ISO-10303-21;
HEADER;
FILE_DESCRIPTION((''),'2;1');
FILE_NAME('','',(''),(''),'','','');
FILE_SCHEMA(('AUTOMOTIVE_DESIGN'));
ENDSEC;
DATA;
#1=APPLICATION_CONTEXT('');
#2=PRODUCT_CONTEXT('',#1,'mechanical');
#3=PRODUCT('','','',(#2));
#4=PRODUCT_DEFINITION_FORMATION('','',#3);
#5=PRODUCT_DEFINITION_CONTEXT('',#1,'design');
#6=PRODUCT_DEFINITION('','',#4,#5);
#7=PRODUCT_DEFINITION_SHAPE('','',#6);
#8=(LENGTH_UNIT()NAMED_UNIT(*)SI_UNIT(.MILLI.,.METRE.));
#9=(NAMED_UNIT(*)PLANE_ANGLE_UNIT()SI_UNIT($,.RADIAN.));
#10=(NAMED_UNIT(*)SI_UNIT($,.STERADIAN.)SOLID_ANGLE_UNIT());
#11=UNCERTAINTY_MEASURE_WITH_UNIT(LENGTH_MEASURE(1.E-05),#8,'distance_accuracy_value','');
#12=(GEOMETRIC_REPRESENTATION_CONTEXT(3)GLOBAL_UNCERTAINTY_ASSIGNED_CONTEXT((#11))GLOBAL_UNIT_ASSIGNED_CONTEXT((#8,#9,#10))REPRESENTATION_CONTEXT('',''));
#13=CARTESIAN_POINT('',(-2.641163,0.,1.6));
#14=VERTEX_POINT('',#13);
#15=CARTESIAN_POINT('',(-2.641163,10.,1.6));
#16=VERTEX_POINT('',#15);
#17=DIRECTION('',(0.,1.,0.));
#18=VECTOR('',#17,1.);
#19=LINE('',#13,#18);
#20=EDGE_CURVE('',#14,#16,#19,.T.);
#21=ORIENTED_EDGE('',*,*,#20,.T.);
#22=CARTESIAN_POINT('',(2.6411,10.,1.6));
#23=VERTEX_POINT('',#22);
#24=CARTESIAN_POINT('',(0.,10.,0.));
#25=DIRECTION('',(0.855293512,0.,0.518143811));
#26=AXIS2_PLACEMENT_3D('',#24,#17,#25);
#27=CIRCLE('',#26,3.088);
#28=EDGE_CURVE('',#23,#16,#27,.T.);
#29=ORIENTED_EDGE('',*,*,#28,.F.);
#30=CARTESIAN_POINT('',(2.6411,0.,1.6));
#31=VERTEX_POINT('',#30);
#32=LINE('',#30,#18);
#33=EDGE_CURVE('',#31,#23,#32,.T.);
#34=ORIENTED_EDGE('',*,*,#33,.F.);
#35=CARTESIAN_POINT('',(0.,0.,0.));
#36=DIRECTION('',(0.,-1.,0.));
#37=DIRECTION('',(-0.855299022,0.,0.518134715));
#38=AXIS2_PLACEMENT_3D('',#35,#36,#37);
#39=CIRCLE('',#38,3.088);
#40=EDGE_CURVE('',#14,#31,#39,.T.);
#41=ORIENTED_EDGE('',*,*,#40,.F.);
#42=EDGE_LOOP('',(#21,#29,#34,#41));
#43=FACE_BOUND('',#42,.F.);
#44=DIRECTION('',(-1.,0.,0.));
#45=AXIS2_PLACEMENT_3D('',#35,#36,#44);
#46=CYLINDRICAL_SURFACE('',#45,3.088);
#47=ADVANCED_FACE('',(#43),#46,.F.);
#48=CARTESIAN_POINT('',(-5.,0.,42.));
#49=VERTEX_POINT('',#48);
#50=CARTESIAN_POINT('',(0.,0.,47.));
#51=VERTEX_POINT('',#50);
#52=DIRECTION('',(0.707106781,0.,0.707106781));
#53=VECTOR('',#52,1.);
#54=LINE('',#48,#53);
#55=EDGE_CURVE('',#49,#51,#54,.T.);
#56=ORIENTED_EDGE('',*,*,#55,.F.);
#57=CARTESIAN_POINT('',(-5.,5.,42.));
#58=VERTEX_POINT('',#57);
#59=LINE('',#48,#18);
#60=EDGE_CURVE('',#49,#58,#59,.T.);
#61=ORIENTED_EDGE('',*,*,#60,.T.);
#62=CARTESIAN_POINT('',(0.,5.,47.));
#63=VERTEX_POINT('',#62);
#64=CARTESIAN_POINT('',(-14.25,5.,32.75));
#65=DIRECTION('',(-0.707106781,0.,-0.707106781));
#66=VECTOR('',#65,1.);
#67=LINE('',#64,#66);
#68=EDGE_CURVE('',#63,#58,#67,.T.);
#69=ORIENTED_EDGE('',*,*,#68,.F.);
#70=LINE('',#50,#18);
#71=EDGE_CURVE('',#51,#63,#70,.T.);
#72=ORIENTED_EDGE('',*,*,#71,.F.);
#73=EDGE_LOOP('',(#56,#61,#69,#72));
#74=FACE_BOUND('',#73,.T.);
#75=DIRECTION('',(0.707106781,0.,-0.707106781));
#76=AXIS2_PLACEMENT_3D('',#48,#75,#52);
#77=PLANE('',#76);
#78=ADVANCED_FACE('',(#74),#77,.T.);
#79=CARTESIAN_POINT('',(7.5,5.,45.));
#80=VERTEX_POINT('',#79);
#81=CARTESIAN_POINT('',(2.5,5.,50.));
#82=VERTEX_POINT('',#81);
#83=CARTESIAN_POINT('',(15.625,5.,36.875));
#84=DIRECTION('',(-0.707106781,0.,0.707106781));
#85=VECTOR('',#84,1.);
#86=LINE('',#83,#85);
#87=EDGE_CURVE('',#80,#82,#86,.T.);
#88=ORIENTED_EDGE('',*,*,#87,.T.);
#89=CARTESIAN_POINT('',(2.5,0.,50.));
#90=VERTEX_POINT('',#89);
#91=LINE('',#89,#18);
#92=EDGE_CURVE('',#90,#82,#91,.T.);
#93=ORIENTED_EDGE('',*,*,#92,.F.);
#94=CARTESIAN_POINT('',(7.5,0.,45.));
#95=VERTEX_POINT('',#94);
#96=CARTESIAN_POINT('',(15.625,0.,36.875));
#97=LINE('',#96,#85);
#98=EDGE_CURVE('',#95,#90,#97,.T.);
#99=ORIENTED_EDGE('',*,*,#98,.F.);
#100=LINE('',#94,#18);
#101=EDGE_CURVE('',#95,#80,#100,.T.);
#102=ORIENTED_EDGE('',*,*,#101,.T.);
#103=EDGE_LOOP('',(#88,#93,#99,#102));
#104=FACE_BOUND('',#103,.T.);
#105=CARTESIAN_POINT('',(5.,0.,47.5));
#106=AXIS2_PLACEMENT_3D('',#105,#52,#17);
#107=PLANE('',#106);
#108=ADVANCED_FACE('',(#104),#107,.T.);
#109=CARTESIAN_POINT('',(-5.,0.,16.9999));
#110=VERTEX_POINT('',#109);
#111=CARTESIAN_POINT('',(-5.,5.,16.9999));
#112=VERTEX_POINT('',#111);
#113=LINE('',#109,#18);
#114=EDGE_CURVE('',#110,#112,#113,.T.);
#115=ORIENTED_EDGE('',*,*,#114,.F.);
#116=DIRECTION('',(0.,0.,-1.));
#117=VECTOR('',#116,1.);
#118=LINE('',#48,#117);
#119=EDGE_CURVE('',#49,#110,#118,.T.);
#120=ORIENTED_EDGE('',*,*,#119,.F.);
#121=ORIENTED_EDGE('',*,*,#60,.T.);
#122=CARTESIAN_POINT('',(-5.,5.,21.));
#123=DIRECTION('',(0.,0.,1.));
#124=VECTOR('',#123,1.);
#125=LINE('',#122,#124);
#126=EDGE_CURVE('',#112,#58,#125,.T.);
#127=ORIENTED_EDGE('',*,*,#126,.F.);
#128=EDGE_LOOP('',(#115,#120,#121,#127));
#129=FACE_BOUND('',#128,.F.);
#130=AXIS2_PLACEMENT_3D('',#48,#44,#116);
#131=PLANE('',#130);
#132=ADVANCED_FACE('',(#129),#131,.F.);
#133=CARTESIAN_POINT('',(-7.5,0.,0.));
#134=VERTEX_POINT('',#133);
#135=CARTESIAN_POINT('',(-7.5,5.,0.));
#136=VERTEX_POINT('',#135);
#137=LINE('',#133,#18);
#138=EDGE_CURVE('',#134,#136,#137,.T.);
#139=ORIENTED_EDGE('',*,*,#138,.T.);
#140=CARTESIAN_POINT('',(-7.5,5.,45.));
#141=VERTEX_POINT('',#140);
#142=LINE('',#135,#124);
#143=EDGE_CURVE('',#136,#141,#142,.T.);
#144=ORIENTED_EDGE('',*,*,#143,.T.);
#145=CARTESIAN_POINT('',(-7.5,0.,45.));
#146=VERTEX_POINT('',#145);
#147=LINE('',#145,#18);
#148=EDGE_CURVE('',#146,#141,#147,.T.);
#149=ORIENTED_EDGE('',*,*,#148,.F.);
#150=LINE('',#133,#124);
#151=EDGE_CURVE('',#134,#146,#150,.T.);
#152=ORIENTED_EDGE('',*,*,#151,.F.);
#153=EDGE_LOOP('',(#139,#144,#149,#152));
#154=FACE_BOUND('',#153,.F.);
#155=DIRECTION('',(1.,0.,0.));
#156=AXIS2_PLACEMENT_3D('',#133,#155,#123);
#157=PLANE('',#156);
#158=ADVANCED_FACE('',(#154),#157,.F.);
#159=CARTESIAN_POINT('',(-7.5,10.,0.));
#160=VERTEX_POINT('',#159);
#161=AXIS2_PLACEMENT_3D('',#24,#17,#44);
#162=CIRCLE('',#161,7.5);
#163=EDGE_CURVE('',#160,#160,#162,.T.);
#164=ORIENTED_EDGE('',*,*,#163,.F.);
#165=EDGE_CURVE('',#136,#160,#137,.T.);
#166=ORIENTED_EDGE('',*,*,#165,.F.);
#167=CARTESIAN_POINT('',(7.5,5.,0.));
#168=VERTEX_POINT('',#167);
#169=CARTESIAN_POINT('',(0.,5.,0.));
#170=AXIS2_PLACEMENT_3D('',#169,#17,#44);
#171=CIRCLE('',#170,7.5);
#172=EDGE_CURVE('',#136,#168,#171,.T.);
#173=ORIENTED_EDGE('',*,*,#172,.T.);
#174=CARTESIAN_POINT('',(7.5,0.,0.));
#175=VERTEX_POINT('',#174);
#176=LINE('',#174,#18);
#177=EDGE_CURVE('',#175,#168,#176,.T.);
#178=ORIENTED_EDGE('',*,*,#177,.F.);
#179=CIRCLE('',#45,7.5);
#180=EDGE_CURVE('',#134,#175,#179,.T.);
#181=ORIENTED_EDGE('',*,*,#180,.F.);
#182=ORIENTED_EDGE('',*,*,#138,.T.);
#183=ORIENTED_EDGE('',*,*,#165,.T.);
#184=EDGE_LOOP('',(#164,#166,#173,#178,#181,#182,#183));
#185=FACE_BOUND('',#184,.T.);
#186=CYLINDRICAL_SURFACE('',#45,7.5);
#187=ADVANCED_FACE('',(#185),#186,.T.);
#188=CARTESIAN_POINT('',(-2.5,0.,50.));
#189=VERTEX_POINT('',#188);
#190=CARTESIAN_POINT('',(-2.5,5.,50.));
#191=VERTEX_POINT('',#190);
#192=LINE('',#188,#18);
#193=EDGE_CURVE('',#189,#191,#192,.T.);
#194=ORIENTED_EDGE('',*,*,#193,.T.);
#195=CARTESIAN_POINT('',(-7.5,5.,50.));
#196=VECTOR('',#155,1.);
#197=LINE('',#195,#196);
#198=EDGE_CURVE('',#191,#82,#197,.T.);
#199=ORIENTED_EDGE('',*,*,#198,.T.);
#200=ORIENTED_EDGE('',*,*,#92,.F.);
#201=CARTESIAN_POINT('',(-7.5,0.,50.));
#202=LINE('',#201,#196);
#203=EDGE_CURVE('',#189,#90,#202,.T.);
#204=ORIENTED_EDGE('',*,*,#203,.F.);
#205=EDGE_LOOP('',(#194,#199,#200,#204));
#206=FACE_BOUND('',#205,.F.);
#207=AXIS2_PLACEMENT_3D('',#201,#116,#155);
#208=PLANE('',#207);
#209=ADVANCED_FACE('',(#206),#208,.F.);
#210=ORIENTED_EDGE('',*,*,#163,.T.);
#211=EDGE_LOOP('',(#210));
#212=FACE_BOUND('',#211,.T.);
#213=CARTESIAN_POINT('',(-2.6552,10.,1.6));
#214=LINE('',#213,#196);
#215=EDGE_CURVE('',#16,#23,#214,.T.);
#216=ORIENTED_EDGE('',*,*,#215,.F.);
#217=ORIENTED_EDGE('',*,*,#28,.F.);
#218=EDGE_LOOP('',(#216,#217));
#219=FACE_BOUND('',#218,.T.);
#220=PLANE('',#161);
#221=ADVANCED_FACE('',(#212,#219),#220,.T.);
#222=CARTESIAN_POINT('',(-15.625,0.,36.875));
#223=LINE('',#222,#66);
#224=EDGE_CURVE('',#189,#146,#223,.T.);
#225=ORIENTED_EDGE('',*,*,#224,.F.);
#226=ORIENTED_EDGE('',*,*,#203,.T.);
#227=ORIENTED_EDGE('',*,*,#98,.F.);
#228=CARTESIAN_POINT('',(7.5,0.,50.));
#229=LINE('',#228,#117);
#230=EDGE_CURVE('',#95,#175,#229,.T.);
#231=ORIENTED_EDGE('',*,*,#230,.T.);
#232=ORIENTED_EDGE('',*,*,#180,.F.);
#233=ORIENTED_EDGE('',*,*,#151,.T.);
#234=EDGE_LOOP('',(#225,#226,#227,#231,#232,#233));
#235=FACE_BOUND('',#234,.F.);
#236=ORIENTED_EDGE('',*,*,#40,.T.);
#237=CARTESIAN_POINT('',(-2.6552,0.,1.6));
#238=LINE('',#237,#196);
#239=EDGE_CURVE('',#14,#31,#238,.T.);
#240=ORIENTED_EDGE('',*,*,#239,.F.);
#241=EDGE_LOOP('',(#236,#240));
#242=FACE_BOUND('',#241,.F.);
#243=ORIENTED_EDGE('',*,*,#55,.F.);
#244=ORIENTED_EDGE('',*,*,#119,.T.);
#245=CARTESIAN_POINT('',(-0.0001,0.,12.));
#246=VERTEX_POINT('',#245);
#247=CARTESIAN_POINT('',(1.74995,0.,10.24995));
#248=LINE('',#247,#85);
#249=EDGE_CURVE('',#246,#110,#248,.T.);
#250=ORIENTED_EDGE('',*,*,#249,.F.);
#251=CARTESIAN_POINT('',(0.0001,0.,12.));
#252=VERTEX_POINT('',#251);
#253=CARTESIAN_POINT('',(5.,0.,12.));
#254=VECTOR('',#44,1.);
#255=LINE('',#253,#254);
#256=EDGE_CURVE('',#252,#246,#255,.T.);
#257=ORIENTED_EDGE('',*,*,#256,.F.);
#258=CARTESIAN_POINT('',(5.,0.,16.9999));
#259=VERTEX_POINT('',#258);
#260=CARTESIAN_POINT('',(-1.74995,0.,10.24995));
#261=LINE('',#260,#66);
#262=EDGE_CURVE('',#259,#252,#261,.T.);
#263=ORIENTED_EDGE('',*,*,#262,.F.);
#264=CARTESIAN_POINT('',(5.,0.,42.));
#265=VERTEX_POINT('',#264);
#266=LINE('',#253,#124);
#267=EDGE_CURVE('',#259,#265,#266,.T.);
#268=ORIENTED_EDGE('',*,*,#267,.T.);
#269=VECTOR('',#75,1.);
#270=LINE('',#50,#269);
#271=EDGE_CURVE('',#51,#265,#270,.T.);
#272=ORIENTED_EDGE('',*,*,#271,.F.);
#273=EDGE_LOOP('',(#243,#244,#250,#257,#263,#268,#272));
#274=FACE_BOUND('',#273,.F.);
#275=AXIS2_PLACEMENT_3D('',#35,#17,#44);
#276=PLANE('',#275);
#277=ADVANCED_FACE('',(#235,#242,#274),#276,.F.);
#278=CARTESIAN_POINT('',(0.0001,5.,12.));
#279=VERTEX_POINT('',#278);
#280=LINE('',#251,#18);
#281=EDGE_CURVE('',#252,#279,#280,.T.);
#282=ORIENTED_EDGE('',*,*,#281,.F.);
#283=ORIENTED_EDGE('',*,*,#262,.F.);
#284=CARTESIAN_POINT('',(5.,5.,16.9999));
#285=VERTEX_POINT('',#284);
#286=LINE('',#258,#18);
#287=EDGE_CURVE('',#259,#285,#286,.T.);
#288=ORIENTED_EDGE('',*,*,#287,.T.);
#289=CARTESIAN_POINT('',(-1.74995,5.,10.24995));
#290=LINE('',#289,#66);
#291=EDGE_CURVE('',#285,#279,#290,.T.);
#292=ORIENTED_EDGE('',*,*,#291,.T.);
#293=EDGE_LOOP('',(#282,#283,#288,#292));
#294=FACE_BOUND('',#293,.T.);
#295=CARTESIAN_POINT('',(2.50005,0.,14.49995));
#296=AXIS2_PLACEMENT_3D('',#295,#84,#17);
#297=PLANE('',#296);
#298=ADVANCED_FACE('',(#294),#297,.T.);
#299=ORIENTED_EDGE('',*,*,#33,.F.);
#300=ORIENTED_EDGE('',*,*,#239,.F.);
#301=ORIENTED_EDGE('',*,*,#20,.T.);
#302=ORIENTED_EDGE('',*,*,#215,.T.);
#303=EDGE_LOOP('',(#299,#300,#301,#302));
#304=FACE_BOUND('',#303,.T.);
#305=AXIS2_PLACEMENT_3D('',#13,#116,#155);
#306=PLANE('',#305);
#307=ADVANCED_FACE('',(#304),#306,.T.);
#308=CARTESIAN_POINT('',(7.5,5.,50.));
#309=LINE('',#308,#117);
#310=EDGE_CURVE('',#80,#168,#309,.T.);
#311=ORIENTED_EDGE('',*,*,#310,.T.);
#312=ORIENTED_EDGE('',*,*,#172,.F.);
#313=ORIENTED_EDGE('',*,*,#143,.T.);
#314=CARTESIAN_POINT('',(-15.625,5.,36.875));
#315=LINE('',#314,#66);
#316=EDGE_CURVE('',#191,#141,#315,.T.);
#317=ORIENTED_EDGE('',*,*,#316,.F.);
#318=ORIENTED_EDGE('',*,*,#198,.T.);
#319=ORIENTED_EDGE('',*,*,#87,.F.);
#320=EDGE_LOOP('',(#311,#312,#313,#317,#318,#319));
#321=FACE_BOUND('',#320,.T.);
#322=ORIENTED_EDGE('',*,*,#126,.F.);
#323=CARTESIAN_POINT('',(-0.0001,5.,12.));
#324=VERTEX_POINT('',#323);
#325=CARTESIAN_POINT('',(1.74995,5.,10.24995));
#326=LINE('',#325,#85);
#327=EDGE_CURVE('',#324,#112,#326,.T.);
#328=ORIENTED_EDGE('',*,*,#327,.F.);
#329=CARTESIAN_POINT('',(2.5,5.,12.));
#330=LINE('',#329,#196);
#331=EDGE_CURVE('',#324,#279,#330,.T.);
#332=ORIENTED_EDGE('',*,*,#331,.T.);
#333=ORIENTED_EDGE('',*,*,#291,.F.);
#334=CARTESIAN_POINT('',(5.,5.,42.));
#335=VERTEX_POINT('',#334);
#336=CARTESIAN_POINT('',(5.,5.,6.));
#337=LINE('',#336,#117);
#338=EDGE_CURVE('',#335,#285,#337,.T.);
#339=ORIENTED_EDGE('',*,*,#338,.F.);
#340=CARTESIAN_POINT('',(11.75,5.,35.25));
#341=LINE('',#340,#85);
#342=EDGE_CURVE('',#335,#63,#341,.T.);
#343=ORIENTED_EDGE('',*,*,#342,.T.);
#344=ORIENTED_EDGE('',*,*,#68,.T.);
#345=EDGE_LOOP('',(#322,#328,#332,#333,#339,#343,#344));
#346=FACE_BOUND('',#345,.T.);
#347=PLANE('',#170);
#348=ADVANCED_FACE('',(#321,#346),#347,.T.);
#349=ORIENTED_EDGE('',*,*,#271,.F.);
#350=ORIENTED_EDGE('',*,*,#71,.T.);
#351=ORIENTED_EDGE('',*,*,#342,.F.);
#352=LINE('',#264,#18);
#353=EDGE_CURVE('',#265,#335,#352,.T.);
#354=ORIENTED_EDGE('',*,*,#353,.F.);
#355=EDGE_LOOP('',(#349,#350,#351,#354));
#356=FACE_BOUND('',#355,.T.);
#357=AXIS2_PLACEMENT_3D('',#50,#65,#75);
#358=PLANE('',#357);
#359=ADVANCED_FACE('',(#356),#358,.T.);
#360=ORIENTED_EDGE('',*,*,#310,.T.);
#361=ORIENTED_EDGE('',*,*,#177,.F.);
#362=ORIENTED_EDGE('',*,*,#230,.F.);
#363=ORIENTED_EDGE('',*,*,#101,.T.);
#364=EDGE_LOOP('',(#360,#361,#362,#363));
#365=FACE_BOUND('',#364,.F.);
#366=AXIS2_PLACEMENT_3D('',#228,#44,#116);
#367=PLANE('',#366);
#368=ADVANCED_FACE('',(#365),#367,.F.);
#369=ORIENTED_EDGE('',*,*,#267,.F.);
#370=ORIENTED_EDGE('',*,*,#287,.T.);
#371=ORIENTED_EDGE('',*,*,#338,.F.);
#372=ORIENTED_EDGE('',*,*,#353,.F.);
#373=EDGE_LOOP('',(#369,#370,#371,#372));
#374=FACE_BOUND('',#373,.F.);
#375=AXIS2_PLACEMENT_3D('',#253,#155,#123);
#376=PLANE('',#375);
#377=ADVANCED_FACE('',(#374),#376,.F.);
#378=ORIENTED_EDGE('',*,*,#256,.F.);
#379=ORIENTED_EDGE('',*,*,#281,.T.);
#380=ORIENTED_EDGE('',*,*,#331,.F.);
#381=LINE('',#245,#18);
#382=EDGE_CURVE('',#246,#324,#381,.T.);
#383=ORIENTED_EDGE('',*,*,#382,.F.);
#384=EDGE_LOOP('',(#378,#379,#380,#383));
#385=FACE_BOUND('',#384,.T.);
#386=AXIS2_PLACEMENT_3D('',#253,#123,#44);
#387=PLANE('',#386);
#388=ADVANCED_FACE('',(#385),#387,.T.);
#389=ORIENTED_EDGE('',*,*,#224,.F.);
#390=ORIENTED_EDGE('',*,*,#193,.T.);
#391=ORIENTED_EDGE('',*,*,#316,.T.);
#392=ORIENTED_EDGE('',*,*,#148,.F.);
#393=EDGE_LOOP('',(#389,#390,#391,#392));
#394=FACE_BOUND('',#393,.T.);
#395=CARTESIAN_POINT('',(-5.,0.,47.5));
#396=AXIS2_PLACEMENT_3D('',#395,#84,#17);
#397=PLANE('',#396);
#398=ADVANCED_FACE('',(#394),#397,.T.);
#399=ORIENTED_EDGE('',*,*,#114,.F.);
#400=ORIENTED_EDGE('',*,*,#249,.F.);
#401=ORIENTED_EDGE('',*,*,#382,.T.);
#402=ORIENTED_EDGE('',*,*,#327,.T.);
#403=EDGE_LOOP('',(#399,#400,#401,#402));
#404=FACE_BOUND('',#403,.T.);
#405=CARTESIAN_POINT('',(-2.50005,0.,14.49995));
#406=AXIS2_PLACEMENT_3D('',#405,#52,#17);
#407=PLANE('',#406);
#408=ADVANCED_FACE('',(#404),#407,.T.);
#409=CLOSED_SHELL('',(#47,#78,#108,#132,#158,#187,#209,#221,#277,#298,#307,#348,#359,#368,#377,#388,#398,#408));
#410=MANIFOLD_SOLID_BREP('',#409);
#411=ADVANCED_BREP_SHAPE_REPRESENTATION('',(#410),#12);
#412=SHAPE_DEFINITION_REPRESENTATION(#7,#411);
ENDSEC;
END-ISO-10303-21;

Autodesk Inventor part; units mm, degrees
ref_plane "YZ Plane" through (0, 0, 0) normal (1, 0, 0) x (0, 1, 0)
ref_plane "XZ Plane" through (0, 0, 0) normal (0, 1, 0) x (-1, 0, 0)
ref_plane "XY Plane" through (0, 0, 0) normal (0, 0, 1) x (1, 0, 0)
sketch "Sketch1" plane through (0, 0, 0) normal (0, 1, 0) x (-1, 0, 0)
  arc A0 (-2.2913, 1) -> (2.2913, 1) centre (0, 0) ccw
  circle A1 centre (0, 0) radius 3.088
  line L0 (2.6552, 1.6) -> (-2.6552, 1.6)
  line L1 (-2.6411, 1.6) -> (2.6552, 1.6)
  line L2 (2.2913, 1) -> (-2.2913, 1)
  circle A2 centre (0, 0) radius 7.5
  line L3 (7.5, 0) -> (7.5, 50)
  line L4 (7.5, 50) -> (-7.5, 50)
  line L5 (-7.5, 50) -> (-7.5, 0)
  point P0 (2.6411, 1.6)
  point P1 (-2.6411, 1.6)
  dimension "d1" = 15
  dimension "d2" = 50
extrude "Extrusion1" add sketch "Sketch1" along normal blind 10 contours A1 L0 | A2 picked at (0.7371, 1.7852)
extrude "Extrusion2" add sketch "Sketch1" along normal blind 5 contours A2 L5 L4 L3
chamfer "Chamfer1" distance 5 angle 45 2 edges at (-7.5, 2.5, 50) (7.5, 2.5, 50)
sketch "Sketch3" plane through (0, 0, 0) normal (0, -1, 0) x (1, 0, 0)
  line L0 (-5, 42) -> (0, 47)
  line L1 (-2.5, 50) -> (-7.5, 45) projected
  line L2 (0, 47) -> (5, 42)
  line L3 (5, 42) -> (-5, 42)
  line L4 (-5, 42) -> (-5, 12)
  line L5 (5, 12) -> (5, 42)
  line L6 (-2.5, 50) -> (2.5, 50) projected
  line L7 (-5, 12) -> (-5, 5.5902)
  arc A0 (7.5, 0) -> (-7.5, 0) centre (0, 0) ccw projected
  line L8 (5, 12) -> (5, 5.5902)
  circle A1 centre (0, 0) radius 7.5 projected
  line L9 (5, 12) -> (-5, 12)
  dimension "d13" = 10
  dimension "d14" = 30
  dimension "d15" = 3
extrude "Extrusion3" cut sketch "Sketch3" against normal blind 5.5 contours L0 L2 L3 | L3 L5 L9 L4
chamfer "Chamfer2" distance 5 angle 45 2 edges at (-5, 2.5, 12) (5, 2.5, 12)
properties part number "StepMotorTest"
